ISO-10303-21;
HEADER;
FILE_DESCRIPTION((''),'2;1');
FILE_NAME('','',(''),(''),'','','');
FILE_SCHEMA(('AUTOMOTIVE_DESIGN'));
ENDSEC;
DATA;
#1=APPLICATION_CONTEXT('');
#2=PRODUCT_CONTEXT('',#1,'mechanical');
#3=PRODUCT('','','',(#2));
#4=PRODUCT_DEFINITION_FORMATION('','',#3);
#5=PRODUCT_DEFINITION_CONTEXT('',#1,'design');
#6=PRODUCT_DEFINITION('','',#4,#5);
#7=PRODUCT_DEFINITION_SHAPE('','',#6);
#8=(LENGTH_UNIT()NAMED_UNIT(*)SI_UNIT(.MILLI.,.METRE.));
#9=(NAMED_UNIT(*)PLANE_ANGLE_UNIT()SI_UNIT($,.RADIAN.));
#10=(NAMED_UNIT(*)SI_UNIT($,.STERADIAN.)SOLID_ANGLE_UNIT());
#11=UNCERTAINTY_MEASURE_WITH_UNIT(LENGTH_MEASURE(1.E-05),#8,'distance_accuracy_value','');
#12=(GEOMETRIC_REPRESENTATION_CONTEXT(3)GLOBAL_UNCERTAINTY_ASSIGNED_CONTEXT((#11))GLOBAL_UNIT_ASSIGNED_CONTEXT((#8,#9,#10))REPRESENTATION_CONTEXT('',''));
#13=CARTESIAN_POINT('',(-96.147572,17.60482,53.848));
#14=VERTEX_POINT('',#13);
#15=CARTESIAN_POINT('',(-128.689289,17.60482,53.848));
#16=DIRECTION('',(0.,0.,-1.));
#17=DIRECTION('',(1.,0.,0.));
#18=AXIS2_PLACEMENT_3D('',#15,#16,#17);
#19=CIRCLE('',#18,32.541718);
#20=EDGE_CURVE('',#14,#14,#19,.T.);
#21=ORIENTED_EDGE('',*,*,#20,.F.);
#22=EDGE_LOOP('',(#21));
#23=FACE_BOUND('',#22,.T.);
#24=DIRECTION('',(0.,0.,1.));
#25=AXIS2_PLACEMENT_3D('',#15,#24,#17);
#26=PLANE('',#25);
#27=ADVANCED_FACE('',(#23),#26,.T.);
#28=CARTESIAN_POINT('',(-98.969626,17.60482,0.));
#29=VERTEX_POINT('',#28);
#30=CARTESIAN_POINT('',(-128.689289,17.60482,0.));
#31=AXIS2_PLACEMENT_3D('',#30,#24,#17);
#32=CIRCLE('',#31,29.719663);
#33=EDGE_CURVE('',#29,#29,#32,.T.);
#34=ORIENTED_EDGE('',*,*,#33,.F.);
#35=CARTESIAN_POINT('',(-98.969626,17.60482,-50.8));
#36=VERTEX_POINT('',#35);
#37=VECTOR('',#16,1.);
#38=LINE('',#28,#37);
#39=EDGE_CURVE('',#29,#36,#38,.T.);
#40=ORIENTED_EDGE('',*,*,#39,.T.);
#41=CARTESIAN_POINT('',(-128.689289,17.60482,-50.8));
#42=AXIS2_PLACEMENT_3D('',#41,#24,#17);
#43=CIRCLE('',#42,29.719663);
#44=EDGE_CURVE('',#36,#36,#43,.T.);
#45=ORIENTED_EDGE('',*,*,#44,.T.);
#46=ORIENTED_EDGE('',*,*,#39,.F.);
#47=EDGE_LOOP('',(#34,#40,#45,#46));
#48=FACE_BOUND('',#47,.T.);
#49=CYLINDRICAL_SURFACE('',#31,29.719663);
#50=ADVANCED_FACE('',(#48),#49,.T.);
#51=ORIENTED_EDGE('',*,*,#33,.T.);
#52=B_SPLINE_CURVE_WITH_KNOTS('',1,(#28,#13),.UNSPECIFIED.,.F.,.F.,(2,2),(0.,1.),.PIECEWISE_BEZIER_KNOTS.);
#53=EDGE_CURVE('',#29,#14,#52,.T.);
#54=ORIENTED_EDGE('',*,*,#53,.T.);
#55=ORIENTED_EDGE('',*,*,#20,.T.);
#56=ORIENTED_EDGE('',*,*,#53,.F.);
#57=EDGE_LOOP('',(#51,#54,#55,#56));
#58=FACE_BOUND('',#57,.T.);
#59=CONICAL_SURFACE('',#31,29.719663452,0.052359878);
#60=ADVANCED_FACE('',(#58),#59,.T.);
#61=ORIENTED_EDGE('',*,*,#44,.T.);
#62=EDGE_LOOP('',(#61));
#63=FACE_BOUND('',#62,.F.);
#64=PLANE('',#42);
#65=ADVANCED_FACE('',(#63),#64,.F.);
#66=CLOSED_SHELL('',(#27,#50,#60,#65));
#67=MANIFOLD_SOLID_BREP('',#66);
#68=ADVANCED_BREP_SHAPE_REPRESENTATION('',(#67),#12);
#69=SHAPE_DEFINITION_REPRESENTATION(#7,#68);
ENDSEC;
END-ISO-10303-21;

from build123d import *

# Parameters (mm, degrees)
F0_R          = 29.7196634515
F1_DEPTH      = 53.848
F1_TAPER      = -3
F1_DEPTH_BACK = 50.8


# Not quite as in the source:
# - the program builds the solid bodies; features that only make, move or delete a surface that nothing else refers to are left out


with BuildPart() as f1:
    # F0 (on Top) → F1 (new body, two sides)
    with BuildSketch(Plane.XY) as f1_sk:
        with Locations((-128.689289093, 17.6048204303)):
            Circle(F0_R)
    extrude(amount=F1_DEPTH, taper=F1_TAPER)
    extrude(f1_sk.sketch, amount=-F1_DEPTH_BACK)


solid = f1.part
